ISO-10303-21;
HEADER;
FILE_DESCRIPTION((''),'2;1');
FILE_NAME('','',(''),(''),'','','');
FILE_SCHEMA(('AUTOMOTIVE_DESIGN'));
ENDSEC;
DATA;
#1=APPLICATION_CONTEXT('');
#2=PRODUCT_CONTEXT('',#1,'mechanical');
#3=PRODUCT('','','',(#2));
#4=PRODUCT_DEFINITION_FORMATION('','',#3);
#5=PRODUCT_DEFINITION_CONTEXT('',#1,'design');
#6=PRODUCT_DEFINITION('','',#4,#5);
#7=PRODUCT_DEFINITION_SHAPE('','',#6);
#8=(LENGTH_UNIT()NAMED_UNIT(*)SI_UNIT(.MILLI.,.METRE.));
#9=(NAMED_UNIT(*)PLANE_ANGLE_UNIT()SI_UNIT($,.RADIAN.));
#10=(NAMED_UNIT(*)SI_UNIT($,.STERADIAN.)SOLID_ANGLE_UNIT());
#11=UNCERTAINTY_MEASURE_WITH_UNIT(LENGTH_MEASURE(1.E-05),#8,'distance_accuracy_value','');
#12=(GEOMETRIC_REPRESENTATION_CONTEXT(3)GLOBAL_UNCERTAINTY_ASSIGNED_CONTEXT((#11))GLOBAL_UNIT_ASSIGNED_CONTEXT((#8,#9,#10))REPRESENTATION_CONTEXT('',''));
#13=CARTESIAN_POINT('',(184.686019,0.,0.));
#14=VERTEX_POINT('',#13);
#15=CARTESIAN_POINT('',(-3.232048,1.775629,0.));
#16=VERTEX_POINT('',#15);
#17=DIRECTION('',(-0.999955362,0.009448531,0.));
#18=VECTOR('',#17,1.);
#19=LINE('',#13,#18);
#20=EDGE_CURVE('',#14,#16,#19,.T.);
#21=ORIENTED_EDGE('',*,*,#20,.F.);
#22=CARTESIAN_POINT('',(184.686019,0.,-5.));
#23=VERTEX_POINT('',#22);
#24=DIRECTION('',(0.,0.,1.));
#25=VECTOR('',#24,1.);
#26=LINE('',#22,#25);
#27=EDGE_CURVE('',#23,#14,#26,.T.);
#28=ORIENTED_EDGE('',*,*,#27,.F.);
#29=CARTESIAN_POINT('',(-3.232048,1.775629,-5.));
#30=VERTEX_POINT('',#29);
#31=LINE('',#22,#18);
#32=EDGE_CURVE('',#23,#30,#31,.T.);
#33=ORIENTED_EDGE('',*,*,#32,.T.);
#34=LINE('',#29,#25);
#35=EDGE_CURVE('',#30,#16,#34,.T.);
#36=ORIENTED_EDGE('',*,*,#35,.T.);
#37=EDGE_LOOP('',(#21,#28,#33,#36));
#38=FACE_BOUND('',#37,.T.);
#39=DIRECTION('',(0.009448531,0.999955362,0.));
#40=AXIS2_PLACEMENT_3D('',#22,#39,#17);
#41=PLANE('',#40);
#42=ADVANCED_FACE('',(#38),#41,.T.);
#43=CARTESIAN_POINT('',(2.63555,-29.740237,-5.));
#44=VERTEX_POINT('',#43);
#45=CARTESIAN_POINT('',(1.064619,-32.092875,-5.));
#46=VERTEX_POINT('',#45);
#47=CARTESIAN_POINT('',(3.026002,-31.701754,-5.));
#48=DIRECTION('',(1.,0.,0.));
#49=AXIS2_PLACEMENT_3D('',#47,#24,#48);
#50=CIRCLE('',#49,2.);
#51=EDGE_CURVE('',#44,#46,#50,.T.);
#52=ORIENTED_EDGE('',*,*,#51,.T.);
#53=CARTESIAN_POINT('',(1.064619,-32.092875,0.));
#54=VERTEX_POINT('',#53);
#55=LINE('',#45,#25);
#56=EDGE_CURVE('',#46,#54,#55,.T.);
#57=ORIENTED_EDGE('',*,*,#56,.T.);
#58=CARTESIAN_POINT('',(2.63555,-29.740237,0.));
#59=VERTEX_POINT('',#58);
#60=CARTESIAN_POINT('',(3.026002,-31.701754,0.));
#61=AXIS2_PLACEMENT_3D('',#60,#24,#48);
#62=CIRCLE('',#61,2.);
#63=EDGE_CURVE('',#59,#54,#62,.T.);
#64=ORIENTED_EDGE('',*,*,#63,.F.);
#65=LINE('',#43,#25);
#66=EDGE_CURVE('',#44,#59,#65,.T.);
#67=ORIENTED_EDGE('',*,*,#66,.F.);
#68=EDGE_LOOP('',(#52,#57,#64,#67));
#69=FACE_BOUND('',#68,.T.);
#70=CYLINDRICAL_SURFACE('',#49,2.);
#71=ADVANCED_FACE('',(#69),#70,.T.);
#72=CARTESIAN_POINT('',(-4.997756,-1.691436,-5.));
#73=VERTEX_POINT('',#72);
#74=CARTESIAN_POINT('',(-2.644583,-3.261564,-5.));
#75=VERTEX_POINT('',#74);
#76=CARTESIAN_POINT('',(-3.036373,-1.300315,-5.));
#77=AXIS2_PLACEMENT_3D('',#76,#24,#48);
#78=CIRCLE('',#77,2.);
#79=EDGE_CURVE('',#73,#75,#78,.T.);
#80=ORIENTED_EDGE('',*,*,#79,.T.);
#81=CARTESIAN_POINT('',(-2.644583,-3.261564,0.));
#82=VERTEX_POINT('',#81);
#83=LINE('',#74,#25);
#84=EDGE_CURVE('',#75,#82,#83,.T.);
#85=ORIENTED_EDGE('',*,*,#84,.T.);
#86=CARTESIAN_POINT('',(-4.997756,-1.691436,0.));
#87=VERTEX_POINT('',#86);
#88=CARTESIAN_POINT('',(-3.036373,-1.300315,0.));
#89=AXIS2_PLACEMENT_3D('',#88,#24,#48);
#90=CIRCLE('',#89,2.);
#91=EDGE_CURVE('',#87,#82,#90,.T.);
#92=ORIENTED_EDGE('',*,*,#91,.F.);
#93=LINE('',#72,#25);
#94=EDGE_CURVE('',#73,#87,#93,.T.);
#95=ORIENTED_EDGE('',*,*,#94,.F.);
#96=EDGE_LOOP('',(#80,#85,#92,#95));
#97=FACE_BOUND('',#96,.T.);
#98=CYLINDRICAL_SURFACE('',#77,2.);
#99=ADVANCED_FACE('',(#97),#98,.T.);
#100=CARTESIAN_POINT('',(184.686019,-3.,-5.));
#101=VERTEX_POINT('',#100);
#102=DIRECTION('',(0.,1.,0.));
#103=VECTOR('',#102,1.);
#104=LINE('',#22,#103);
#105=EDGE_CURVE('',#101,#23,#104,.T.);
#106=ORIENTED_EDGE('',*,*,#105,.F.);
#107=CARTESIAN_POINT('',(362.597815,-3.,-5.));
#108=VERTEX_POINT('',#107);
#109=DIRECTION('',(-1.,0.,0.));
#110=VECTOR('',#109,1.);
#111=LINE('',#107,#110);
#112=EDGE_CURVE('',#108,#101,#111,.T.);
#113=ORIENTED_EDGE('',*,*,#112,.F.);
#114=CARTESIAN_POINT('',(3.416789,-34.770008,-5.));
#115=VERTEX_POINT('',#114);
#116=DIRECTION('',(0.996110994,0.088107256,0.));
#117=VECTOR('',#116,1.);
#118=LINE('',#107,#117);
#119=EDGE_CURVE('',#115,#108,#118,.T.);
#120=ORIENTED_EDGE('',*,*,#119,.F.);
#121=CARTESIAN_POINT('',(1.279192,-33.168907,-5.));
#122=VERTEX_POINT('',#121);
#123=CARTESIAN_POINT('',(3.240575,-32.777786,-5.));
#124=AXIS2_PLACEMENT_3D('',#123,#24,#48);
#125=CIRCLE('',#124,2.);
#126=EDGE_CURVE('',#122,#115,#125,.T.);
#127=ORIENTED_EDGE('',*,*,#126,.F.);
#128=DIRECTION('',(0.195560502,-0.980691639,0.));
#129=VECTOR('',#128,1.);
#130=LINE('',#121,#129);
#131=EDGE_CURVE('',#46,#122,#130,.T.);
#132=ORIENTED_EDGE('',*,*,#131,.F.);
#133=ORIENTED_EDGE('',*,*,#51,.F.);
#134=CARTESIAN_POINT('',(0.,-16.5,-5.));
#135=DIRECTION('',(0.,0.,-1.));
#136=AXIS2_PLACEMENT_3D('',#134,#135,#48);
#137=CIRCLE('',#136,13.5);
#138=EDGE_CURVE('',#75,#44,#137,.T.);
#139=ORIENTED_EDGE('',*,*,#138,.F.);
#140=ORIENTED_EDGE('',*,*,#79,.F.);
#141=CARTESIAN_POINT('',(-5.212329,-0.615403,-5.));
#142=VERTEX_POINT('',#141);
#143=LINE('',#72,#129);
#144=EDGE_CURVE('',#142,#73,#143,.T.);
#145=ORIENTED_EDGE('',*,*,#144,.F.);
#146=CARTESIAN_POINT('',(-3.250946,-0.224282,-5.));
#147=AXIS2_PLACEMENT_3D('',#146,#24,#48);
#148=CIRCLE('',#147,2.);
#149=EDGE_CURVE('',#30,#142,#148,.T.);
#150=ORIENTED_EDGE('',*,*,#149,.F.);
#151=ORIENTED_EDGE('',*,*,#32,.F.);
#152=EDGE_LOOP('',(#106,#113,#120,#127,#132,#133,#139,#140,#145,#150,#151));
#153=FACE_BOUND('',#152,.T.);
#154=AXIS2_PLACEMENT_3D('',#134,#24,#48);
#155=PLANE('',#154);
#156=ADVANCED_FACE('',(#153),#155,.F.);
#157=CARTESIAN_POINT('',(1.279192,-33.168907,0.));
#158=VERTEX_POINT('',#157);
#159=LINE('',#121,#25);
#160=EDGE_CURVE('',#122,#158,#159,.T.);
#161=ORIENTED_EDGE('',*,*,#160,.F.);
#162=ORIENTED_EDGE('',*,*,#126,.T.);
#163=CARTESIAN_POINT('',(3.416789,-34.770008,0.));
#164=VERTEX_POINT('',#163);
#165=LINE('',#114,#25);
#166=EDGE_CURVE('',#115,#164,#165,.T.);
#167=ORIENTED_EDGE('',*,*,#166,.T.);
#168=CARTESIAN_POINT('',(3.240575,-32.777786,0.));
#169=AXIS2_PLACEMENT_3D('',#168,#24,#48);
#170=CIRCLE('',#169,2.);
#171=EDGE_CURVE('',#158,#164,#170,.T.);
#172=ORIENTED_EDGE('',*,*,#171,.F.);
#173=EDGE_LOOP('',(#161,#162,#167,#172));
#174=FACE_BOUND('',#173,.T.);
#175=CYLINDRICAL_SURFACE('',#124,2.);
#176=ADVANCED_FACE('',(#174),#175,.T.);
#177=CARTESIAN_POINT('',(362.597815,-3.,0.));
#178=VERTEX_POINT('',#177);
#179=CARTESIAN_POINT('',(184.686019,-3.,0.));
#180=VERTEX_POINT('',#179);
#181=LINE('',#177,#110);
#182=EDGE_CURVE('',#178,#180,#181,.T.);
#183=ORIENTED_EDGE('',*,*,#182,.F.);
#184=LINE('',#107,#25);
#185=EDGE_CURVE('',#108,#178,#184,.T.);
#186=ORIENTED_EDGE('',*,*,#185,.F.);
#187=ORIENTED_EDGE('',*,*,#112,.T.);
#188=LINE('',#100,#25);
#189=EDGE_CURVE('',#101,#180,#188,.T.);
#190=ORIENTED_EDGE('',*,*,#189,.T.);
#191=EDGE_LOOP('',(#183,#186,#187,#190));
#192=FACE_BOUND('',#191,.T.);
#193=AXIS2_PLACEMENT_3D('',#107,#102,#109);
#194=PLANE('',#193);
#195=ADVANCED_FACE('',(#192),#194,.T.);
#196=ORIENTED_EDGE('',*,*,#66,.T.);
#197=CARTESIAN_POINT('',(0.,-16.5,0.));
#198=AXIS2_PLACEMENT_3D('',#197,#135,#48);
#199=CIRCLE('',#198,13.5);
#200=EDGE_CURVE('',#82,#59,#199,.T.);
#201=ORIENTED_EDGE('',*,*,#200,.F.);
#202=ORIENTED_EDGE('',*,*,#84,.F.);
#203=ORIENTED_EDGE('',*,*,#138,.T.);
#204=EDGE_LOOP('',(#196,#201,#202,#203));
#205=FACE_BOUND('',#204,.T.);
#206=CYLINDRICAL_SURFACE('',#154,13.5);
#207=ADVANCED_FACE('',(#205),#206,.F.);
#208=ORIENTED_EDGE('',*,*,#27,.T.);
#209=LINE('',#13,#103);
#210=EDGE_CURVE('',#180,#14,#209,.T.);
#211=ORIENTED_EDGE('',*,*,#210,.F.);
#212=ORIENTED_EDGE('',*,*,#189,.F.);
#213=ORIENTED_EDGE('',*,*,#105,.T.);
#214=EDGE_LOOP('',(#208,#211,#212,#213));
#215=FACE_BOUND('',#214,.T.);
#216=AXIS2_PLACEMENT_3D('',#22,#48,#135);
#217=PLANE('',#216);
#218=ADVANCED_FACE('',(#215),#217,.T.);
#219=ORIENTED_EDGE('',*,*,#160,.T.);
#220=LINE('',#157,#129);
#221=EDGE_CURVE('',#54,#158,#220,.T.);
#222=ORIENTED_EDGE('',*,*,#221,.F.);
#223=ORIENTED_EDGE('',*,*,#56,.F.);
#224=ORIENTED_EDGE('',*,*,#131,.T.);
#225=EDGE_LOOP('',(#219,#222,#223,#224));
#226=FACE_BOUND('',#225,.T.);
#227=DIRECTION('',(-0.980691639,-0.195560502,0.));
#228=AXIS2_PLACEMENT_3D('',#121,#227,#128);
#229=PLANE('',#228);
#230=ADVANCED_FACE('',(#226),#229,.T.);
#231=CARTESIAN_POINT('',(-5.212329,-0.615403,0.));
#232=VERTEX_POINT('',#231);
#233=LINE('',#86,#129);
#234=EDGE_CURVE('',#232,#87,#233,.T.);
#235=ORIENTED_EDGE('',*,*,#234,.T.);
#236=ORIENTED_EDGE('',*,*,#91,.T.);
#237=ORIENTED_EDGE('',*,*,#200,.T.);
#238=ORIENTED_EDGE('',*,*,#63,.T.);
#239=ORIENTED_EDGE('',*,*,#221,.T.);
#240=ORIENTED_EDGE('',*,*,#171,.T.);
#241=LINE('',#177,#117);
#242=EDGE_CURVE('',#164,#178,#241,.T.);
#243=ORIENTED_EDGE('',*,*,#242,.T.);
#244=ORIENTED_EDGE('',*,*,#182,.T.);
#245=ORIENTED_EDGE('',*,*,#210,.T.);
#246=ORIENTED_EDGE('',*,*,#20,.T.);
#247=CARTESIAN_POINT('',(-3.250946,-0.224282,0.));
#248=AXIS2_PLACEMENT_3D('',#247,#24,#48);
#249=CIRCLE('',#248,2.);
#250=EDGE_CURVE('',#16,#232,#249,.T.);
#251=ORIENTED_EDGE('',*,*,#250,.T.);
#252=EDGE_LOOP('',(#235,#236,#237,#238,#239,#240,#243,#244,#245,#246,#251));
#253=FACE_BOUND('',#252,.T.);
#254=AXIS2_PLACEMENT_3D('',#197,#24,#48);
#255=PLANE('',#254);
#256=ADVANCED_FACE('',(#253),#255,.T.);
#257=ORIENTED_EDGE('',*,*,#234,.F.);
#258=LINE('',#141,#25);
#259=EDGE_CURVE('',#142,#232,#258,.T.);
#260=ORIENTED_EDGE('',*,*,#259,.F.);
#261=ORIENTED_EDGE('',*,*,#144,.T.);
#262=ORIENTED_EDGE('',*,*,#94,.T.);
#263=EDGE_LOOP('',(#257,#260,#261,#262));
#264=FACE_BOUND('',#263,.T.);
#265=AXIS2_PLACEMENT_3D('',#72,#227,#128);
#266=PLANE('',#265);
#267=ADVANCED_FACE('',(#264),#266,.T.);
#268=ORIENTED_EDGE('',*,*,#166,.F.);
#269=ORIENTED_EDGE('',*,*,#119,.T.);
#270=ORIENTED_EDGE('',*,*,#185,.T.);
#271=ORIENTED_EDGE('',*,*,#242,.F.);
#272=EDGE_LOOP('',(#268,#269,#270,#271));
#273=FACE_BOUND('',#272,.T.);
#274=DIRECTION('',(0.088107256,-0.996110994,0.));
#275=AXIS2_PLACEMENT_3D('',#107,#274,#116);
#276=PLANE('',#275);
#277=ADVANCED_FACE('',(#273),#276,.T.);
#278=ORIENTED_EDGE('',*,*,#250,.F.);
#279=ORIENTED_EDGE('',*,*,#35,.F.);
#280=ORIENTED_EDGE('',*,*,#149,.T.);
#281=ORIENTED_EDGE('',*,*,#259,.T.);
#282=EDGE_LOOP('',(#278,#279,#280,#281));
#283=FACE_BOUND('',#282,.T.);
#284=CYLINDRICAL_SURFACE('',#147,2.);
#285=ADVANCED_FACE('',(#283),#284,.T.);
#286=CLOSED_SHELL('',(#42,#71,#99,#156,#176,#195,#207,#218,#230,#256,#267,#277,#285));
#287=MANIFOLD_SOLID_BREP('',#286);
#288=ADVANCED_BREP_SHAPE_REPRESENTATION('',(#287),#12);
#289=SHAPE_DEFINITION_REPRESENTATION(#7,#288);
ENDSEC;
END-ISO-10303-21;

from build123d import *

# Parameters (mm, degrees)
SM_BASE_FLANGE_1_DEPTH = 5


# Sheet-metal steps are written as plain solids
with BuildPart() as part:
    # Sketch 1 → Базовая кромка1 (new body)
    with BuildSketch(Plane.XY):
        with BuildLine():
            Line((1.279191503, -33.168907268), (1.064618958, -32.092874536))
            ThreePointArc((1.064618958, -32.092874536), (1.362719913, -30.59112672), (2.635550334, -29.740236948))
            ThreePointArc((2.635550334, -29.740236948), (13.239337122, -13.859933227), (-2.644582905, -3.261564244))
            ThreePointArc((-2.644582905, -3.261564244), (-4.146432324, -2.963975592), (-4.997756242, -1.691435506))
            Line((-4.997756242, -1.691435506), (-5.212328788, -0.615402774))
            ThreePointArc((-5.212328788, -0.615402774), (-4.791260853, 1.051425345), (-3.232048448, 1.775628952))
            Line((-3.232048448, 1.775628952), (184.68601887, 0))
            Line((184.68601887, 0), (184.68601887, -3))
            Line((184.68601887, -3), (362.597814819, -3))
            Line((362.597814819, -3), (3.416789292, -34.770008252))
            ThreePointArc((3.416789292, -34.770008252), (2.041580213, -34.378539846), (1.279191503, -33.168907268))
        make_face()
    extrude(amount=-SM_BASE_FLANGE_1_DEPTH)


solid = part.part
